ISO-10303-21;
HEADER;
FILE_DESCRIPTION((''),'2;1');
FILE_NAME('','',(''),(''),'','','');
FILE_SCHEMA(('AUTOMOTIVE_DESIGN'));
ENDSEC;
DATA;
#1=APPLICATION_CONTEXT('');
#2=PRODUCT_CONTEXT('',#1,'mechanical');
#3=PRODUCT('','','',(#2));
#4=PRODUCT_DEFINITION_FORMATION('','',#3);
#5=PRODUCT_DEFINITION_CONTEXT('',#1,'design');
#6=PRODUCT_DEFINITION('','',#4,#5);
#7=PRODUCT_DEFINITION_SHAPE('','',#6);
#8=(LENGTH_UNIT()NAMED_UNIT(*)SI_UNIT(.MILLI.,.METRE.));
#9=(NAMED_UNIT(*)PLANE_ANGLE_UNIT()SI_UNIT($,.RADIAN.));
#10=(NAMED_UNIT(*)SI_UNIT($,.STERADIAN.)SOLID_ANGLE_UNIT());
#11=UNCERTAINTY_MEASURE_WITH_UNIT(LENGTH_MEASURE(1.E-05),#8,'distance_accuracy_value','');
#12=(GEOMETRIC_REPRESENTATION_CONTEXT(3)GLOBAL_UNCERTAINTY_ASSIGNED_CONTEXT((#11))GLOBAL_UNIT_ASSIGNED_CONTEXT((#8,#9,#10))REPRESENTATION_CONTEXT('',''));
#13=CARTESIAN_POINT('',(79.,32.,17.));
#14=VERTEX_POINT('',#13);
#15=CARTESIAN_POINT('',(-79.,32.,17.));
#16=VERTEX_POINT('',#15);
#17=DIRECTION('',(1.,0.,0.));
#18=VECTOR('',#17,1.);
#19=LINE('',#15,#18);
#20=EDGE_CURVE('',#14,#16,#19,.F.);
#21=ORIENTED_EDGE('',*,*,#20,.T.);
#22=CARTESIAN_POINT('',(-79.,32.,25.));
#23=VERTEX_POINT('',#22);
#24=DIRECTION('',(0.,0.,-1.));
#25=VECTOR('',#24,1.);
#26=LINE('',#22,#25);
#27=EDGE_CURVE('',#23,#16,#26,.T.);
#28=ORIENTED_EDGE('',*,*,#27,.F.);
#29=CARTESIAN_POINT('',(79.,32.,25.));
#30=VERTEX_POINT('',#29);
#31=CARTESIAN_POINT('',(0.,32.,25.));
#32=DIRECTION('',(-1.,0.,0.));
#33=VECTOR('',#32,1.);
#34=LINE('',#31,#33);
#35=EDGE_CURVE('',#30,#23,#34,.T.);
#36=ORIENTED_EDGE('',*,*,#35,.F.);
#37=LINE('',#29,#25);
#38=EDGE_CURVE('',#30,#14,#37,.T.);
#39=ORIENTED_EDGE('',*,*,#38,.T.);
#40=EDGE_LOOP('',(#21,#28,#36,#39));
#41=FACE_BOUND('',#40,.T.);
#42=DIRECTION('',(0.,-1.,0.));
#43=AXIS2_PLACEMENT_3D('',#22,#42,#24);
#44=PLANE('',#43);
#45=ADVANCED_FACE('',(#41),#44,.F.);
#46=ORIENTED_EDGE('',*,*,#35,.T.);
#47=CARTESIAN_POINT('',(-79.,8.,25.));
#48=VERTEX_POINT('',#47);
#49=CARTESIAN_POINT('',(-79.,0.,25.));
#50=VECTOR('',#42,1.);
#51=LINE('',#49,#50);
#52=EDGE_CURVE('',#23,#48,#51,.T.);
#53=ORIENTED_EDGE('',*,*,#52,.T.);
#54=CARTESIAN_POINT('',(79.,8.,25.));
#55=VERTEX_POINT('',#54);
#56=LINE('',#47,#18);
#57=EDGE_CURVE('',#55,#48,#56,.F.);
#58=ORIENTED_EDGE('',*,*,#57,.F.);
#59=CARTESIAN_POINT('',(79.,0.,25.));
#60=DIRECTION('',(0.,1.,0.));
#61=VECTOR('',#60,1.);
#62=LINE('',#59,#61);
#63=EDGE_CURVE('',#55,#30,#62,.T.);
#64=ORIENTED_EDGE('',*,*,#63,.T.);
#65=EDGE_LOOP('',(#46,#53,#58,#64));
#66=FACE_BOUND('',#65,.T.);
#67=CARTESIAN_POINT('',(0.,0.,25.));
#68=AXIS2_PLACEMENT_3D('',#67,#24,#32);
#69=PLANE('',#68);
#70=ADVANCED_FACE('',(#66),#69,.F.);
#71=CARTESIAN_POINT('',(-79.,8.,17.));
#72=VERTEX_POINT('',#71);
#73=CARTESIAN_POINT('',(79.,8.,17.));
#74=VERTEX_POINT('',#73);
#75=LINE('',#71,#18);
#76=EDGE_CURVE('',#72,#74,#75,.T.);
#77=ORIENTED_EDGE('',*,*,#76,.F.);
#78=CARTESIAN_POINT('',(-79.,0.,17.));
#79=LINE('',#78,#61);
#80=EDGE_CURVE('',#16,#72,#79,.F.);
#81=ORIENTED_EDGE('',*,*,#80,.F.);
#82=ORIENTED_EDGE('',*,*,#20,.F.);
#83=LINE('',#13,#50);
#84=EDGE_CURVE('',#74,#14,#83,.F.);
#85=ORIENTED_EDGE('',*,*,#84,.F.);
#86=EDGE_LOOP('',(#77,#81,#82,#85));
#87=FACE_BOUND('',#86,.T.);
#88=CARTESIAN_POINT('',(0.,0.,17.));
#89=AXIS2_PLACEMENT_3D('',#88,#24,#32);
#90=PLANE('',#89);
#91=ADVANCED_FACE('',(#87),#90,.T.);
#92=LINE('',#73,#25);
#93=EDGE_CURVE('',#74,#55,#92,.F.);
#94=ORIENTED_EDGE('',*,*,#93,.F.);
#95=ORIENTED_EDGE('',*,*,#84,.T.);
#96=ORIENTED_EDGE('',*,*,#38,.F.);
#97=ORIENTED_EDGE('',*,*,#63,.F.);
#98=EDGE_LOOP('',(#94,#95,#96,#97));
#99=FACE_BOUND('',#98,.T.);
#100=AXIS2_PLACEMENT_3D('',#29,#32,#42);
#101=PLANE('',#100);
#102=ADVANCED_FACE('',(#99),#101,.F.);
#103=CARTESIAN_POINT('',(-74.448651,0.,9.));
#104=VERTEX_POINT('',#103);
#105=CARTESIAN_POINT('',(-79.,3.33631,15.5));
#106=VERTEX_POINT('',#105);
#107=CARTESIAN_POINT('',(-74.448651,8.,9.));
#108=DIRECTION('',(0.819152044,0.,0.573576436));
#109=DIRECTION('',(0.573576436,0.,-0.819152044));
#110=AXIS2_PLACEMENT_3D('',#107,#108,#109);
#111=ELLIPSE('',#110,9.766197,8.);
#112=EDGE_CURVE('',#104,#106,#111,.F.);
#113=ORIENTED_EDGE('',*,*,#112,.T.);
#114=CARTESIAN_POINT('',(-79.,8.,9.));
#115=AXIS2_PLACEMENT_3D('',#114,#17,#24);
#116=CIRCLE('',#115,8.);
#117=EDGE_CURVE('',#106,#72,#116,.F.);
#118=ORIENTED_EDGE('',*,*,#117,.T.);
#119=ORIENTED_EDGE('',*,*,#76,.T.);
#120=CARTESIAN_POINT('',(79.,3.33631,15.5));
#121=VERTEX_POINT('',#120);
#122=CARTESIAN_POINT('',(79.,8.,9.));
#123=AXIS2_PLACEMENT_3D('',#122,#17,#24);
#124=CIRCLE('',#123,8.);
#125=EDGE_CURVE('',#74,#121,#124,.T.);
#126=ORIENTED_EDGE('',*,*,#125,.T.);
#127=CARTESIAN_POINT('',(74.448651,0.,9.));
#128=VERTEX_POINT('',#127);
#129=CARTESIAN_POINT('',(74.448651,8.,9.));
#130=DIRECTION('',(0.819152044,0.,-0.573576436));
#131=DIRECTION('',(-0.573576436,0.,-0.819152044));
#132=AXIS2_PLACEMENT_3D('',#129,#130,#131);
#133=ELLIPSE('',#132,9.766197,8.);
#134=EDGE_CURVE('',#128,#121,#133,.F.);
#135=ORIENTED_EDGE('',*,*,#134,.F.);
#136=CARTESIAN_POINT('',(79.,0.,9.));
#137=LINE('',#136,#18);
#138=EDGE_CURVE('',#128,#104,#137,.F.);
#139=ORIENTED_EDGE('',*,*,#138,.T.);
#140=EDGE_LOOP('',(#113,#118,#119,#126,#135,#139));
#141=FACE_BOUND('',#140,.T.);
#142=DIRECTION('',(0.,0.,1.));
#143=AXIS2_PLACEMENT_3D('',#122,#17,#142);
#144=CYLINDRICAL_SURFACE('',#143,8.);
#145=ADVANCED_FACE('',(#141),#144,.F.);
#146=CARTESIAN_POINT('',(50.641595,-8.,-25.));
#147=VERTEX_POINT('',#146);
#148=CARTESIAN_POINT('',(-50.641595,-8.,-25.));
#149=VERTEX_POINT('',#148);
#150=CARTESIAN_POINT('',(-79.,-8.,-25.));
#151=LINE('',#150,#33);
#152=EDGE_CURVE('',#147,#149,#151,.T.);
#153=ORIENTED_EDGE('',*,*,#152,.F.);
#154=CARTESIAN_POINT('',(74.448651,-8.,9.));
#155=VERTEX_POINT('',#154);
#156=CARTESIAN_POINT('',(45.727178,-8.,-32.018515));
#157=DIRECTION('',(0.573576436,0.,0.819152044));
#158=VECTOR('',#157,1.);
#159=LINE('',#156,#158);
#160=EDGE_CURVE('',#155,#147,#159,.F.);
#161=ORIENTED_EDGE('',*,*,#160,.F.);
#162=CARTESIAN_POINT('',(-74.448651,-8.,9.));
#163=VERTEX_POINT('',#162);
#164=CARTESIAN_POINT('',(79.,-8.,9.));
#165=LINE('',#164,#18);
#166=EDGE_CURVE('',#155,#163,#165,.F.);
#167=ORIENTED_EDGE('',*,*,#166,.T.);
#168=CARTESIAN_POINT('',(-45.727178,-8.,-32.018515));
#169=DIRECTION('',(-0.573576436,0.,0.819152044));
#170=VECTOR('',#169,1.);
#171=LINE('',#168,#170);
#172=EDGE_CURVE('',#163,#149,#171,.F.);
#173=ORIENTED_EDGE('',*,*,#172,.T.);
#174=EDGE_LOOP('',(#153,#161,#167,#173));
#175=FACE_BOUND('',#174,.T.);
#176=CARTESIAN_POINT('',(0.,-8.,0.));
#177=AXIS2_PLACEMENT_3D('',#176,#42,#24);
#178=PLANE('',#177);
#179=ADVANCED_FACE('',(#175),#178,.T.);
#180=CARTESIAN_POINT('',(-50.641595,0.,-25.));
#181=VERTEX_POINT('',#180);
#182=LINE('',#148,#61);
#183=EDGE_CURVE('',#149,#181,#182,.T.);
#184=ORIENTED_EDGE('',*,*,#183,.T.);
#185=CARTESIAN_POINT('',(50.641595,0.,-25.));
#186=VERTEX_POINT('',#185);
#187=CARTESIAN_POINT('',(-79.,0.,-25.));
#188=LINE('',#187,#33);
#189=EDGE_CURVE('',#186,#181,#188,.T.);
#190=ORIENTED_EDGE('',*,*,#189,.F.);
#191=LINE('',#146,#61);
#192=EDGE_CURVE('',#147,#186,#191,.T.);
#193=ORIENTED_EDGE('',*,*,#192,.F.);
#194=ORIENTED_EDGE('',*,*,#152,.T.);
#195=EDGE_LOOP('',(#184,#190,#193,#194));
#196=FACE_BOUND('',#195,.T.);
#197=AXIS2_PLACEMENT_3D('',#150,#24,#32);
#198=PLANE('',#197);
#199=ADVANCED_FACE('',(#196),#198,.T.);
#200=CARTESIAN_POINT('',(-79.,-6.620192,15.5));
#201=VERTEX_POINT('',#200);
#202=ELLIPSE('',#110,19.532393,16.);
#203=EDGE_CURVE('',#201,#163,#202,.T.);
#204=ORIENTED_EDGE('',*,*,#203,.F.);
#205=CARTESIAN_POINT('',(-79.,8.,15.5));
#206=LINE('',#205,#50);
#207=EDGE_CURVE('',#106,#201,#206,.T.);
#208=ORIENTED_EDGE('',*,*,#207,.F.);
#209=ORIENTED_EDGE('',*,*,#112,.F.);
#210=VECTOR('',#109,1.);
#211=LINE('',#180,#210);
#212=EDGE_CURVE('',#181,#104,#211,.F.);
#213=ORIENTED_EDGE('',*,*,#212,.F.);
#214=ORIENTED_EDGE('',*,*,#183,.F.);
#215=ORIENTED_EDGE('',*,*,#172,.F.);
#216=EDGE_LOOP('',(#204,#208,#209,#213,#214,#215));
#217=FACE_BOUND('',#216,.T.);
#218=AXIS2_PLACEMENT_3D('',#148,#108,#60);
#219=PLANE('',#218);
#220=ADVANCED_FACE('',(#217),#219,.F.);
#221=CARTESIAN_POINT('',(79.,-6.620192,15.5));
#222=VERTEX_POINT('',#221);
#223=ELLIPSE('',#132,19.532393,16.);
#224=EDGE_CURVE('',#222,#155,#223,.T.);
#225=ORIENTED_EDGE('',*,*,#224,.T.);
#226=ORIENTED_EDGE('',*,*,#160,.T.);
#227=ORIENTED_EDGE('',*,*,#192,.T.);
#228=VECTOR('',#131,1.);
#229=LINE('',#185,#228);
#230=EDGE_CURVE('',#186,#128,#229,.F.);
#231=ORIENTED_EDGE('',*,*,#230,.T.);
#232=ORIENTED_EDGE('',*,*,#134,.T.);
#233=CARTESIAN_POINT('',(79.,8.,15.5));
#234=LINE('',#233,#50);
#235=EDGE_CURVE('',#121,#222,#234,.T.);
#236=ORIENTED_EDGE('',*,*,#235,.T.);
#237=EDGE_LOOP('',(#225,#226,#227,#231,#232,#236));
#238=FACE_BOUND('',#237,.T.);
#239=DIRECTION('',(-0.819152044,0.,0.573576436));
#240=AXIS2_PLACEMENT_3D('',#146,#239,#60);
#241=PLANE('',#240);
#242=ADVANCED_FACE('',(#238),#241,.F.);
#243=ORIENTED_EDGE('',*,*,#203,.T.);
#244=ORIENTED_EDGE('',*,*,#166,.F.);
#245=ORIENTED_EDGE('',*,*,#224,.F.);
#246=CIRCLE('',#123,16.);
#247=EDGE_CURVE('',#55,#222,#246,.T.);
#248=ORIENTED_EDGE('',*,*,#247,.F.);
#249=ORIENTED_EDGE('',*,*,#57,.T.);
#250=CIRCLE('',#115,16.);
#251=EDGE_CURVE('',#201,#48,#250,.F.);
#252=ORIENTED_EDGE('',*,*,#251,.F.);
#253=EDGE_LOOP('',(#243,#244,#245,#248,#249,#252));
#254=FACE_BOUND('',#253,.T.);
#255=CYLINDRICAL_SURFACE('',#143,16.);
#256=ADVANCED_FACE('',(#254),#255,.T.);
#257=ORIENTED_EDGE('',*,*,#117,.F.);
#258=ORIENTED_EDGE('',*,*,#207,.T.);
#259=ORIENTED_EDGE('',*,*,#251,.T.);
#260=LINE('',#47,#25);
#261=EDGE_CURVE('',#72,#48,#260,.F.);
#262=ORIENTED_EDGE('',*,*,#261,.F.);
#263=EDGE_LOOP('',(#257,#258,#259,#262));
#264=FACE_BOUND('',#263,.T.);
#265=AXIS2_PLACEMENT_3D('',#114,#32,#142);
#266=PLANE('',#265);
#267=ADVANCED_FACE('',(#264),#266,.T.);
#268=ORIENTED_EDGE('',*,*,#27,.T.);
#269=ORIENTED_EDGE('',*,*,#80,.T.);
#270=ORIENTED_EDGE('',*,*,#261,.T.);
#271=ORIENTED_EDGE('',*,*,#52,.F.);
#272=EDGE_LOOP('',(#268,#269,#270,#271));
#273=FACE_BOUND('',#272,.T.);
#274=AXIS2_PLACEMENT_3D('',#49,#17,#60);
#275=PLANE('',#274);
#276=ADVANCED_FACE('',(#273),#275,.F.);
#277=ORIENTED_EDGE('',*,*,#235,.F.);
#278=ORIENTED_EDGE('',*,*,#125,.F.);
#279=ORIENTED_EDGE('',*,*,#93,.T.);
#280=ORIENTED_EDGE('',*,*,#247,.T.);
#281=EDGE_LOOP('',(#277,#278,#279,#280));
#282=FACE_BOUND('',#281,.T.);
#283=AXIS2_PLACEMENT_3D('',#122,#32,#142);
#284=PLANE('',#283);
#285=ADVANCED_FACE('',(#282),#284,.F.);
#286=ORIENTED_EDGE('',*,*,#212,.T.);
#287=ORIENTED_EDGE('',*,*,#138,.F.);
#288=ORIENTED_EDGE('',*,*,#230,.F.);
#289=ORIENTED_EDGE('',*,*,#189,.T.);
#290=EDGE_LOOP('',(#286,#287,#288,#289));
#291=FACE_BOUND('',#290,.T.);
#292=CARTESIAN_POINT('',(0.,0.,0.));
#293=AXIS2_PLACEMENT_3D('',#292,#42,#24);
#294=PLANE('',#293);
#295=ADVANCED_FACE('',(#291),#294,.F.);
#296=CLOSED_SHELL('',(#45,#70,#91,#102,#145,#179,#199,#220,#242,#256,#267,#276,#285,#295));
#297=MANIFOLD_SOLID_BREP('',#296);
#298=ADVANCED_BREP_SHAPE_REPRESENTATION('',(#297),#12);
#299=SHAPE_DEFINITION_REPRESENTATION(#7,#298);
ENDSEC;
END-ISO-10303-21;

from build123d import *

# Parameters (mm, degrees)
SKETCH1_W                    = 158
SKETCH1_H                    = 50
BASE_FLANGE1_DEPTH           = 8
EDGE_FLANGE1_STRIP_W         = 48
EDGE_FLANGE1_STRIP_H         = 8
EDGE_FLANGE1_STRIP_CUT_DEPTH = 158
EDGE_FLANGE1_DEPTH           = 158
CHAMFER1_SIZE                = 40.5
CHAMFER1_SIZE2               = 28.358405297
MIRROR2_START                = 55.822576735
MIRROR2_OUTLINE_W            = 53
MIRROR2_OUTLINE_H            = 13
MIRROR2_DEPTH                = 23.229845673


# Read off the part's stored shape, not the designer's step: Mirror2
# Sheet-metal steps are written as plain solids
with BuildPart() as part:
    # Sketch1 → Base-Flange1 (new body)
    with BuildSketch(Plane(origin=(0, 0, 0), x_dir=(1, 0, 0), z_dir=(0, 1, 0))):
        Rectangle(SKETCH1_W, SKETCH1_H)
    extrude(amount=-BASE_FLANGE1_DEPTH)

    # Edge-Flange1 strip (across the edge) → Edge-Flange1 strip cut (cut)
    with BuildSketch(Plane(origin=(-79, 0, 25), x_dir=(0, 0, -1), z_dir=(1, 0, 0))):
        with Locations((-8, -4)):
            Rectangle(EDGE_FLANGE1_STRIP_W, EDGE_FLANGE1_STRIP_H)
    extrude(amount=EDGE_FLANGE1_STRIP_CUT_DEPTH, mode=Mode.SUBTRACT)

    # Edge-Flange1 section (across the edge) → Edge-Flange1 (add)
    with BuildSketch(Plane(origin=(-79, 0, 25), x_dir=(0, 0, -1), z_dir=(1, 0, 0))):
        with BuildLine():
            Line((0, 8), (0, 32))
            Line((0, 32), (8, 32))
            Line((8, 32), (8, 8))
            ThreePointArc((8, 8), (10.343145751, 2.343145751), (16, 0))
            Line((16, 0), (16, -8))
            ThreePointArc((16, -8), (4.686291501, -3.313708499), (0, 8))
        make_face()
    extrude(amount=EDGE_FLANGE1_DEPTH)

    # Chamfer1
    chamfer1_edges = [part.edges().sort_by_distance(p)[0] for p in [
        (-79, -4, -25),
    ]]
    chamfer1_side = [part.faces().sort_by_distance(p)[0] for p in [
        (-79, -0.640312424, -8),
    ]]
    chamfer(chamfer1_edges, length=CHAMFER1_SIZE, length2=CHAMFER1_SIZE2, reference=chamfer1_side[0])

    # Mirror2 outline → Mirror2 (cut)
    with BuildSketch(Plane(origin=(0, 0, 0), x_dir=(0.5735764363510512, 0, 0.8191520442889882), z_dir=(0.8191520442889882, 0, -0.5735764363510512)).offset(MIRROR2_START)):
        with Locations((33.5, 1.5)):
            Rectangle(MIRROR2_OUTLINE_W, MIRROR2_OUTLINE_H)
    extrude(amount=MIRROR2_DEPTH, mode=Mode.SUBTRACT)


solid = part.part
